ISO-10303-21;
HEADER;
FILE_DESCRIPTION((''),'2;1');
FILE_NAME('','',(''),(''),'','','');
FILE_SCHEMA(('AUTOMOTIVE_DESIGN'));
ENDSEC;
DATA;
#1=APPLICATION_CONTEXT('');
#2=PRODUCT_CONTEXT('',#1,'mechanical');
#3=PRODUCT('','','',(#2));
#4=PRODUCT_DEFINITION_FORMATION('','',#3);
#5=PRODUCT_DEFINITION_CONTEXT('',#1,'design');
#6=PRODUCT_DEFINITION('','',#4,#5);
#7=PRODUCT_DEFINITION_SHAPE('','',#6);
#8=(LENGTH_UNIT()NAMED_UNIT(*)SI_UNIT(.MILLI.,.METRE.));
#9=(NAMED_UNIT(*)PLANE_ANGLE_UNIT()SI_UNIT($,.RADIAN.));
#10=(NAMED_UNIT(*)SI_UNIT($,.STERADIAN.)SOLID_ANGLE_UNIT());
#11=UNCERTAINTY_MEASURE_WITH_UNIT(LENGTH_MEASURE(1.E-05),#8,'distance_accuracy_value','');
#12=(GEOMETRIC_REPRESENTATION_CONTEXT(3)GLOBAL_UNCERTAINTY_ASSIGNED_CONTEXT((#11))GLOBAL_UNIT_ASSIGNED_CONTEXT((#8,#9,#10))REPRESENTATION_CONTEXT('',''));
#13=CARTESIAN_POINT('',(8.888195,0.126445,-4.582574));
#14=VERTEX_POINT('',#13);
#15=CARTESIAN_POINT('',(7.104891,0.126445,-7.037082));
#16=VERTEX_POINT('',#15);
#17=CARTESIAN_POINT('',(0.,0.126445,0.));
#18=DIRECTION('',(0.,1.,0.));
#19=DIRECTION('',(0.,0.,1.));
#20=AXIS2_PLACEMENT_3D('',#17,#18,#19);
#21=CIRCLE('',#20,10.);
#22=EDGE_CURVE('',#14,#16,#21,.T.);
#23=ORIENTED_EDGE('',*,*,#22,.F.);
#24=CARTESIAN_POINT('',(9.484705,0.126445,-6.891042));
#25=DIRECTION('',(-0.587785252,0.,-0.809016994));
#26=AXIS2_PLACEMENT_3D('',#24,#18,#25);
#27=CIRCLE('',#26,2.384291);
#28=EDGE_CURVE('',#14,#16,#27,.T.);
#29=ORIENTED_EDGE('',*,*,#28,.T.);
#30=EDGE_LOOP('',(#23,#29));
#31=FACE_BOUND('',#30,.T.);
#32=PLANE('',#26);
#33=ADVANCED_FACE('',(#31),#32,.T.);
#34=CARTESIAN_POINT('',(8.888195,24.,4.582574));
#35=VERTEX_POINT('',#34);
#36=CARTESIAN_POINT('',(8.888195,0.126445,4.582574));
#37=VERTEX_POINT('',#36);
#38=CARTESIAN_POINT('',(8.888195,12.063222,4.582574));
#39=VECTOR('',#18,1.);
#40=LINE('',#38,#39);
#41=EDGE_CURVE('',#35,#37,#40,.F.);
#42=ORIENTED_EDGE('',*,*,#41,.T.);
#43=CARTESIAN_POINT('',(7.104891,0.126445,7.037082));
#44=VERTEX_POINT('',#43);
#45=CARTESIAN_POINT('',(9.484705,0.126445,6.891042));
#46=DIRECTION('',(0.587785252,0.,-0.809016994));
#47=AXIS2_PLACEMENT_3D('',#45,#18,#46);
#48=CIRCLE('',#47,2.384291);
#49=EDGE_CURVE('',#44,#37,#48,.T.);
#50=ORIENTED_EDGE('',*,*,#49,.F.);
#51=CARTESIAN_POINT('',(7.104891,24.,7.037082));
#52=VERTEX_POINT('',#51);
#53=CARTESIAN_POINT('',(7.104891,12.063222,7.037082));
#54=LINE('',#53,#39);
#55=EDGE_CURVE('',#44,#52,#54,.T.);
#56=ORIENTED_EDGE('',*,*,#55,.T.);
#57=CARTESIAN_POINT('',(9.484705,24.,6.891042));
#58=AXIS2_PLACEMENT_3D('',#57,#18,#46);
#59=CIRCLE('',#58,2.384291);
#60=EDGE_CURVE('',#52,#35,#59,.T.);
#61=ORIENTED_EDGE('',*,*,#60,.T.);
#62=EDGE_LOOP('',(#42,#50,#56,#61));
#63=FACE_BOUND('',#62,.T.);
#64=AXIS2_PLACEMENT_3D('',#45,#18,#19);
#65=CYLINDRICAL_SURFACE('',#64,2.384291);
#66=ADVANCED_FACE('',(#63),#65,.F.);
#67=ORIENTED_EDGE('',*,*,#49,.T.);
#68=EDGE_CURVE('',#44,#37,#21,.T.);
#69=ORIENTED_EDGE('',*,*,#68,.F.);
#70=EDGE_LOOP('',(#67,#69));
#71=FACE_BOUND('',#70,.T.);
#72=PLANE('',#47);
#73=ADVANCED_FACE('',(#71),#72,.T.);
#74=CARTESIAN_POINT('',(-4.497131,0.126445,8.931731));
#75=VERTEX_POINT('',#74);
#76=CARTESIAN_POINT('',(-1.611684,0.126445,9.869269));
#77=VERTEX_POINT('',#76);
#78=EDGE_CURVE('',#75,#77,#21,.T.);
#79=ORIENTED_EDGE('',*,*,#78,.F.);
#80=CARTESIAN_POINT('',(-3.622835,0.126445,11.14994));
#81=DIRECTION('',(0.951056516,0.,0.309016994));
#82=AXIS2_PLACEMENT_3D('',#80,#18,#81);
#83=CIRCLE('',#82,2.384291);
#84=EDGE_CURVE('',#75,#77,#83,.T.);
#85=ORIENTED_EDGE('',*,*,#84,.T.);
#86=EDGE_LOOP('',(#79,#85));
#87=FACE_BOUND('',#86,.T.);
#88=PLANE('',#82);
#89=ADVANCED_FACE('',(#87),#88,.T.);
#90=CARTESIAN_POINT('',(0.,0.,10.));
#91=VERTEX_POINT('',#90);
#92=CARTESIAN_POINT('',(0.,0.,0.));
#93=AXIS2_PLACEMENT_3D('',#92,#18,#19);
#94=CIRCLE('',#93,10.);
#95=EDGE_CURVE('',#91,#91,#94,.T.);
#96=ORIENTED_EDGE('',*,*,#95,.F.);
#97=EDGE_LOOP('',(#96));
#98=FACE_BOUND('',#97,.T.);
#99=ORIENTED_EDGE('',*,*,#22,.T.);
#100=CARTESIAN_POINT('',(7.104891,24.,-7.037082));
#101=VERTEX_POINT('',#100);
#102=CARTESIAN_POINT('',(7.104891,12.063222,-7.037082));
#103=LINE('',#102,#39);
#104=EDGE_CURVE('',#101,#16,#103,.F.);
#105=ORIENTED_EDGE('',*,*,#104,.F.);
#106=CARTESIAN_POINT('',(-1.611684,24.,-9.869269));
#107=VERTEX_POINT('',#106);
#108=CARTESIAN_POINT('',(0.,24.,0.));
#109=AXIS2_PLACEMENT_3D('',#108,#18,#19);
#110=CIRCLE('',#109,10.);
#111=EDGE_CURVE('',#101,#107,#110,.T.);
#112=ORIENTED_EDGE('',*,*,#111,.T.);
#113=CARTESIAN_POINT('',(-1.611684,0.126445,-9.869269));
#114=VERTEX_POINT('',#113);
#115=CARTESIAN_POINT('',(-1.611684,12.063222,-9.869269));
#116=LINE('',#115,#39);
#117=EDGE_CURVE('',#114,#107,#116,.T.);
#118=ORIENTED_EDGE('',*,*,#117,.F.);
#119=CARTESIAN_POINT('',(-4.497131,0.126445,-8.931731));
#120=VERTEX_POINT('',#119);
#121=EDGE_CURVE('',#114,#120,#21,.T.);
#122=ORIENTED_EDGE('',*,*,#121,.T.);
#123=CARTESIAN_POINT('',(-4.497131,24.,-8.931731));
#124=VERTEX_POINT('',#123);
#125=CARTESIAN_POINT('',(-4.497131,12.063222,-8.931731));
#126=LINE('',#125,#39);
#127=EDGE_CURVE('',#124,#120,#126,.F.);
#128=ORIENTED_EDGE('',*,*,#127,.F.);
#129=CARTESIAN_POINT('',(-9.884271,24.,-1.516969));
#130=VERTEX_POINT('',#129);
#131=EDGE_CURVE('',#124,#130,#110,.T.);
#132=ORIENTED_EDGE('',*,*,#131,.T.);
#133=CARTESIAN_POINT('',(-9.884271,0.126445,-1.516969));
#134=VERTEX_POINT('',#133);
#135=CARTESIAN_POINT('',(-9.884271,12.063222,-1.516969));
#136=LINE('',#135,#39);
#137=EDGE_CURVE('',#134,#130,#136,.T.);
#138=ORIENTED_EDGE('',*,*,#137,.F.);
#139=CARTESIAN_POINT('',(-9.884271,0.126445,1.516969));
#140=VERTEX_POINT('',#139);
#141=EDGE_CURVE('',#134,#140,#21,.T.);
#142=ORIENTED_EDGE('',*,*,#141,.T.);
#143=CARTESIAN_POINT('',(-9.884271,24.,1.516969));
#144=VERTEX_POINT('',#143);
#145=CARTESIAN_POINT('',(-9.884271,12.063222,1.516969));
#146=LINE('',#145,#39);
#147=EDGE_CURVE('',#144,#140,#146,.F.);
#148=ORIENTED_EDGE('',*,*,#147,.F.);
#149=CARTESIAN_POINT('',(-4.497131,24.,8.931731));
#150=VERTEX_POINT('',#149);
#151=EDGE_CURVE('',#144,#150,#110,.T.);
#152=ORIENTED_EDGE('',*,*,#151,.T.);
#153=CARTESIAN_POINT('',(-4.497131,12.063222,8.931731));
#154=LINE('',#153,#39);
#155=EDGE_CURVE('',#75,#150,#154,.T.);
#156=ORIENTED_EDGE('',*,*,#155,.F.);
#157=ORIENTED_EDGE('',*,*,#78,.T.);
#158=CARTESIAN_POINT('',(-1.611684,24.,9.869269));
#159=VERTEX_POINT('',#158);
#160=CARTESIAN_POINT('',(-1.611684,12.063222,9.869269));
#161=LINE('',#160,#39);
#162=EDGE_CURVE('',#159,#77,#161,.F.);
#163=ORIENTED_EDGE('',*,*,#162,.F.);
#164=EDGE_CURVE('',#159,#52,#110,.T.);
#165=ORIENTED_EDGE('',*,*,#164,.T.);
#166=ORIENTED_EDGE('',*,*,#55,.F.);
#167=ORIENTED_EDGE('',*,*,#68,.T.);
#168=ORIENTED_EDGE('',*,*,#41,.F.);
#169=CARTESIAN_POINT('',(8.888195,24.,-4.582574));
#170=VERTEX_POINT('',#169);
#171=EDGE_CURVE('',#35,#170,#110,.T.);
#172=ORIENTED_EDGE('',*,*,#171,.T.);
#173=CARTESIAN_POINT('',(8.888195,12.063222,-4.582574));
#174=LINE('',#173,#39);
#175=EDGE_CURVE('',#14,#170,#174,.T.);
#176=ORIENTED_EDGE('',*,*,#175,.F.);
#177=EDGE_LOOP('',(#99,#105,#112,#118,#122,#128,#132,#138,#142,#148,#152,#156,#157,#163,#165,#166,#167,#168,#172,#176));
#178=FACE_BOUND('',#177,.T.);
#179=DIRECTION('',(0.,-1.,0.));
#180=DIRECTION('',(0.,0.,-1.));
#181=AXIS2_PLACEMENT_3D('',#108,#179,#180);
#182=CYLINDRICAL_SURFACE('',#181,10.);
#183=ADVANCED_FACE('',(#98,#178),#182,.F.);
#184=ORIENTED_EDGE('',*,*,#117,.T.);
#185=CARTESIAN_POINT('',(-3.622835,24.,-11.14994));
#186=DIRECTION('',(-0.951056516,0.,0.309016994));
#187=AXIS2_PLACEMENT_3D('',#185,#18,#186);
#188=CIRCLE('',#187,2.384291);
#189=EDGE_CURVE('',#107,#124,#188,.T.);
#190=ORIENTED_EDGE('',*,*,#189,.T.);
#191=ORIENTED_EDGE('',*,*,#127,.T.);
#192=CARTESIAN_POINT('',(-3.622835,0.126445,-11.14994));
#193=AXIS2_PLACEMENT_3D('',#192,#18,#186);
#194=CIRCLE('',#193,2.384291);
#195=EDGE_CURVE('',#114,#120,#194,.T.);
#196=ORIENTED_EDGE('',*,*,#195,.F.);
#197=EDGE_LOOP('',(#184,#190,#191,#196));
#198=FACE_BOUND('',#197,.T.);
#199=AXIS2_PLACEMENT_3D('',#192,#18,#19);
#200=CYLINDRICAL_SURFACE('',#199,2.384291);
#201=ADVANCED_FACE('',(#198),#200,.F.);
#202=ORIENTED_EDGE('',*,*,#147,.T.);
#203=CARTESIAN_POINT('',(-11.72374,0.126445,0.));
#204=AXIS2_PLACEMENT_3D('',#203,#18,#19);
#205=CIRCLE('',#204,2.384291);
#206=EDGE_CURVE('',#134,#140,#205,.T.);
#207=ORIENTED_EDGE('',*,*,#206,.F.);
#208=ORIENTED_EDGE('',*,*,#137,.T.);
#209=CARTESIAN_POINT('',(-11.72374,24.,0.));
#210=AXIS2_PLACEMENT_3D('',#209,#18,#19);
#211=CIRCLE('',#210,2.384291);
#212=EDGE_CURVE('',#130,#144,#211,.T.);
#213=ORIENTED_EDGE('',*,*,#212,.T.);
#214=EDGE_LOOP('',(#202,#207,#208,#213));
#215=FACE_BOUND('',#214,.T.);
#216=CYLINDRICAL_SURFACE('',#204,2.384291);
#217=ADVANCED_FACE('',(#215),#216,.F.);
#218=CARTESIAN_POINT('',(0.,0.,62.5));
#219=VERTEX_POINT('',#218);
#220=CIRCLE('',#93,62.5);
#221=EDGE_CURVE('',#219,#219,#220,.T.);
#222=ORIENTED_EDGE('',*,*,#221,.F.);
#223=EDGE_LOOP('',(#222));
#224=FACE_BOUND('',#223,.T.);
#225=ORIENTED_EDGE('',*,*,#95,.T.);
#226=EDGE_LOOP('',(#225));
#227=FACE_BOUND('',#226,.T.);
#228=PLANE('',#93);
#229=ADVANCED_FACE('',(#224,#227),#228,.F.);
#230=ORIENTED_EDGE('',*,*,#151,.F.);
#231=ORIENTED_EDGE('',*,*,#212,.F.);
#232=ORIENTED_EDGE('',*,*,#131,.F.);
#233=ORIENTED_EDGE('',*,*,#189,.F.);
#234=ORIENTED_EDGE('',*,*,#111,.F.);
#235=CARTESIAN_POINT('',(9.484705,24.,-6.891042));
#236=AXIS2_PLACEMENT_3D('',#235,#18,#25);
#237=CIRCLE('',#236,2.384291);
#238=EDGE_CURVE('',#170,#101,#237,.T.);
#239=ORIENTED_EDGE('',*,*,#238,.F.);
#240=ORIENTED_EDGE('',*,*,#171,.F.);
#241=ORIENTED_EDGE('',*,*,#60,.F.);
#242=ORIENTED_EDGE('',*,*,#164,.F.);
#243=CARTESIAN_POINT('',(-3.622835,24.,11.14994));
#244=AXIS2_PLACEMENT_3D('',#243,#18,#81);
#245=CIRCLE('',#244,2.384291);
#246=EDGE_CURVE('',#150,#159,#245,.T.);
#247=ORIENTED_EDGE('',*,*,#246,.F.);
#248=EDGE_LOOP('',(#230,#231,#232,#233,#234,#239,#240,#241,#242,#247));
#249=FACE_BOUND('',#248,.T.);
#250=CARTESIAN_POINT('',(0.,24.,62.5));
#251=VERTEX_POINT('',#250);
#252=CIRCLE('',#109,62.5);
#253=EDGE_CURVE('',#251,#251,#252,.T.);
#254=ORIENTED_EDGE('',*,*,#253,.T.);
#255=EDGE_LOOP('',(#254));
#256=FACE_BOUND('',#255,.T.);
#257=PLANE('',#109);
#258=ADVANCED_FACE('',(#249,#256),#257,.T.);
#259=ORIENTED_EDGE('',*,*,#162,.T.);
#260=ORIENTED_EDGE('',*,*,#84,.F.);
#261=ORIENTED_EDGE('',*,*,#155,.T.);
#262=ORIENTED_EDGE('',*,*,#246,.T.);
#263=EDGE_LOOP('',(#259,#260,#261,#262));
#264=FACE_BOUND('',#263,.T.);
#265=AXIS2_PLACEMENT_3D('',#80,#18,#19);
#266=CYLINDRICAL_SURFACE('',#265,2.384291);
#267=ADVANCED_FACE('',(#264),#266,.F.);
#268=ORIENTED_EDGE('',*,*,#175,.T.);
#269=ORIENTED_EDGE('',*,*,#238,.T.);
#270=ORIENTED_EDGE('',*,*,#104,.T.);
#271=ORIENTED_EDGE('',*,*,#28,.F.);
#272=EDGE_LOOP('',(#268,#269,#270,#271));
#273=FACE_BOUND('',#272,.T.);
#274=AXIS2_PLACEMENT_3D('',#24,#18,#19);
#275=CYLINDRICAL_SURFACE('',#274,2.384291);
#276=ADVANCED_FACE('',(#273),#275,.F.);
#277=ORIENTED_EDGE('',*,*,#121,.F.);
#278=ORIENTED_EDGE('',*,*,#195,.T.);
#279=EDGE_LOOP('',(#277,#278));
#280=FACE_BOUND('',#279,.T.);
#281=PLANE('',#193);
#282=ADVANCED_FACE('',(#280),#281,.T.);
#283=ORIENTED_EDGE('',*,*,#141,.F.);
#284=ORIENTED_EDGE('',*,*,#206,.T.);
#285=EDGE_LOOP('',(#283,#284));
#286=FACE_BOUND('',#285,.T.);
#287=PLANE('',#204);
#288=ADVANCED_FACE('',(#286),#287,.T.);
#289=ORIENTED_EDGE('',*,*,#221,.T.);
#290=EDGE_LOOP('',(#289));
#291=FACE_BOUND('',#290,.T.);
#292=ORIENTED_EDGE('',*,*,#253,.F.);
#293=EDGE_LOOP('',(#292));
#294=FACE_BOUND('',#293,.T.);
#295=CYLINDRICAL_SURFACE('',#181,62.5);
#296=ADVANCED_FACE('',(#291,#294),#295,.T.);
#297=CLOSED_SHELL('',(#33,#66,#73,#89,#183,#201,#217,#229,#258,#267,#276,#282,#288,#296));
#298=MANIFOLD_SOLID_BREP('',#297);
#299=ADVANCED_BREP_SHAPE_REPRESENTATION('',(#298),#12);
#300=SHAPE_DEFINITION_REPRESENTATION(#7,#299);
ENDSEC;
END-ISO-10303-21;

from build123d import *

# Parameters (mm, degrees)
SKETCH1_R           = 62.5
BOSS_EXTRUDE1_DEPTH = 24
SKETCH2_R           = 10
CUT_EXTRUDE1_DEPTH  = 92.588754768
SKETCH3_R           = 2.384291232
CUT_EXTRUDE2_DEPTH  = 23.873555075
CIRPATTERN1_COUNT   = 5


with BuildPart() as part:
    # Sketch1 → Boss-Extrude1 (new body)
    with BuildSketch(Plane(origin=(0, 0, 0), x_dir=(1, 0, 0), z_dir=(0, 1, 0))):
        Circle(SKETCH1_R)
    extrude(amount=BOSS_EXTRUDE1_DEPTH)

    # Sketch2 → Cut-Extrude1 (cut, through all)
    with BuildSketch(Plane(origin=(0, 0, 0), x_dir=(1, 0, 0), z_dir=(0, 1, 0))):
        Circle(SKETCH2_R)
    extrude(amount=CUT_EXTRUDE1_DEPTH, mode=Mode.SUBTRACT)

    # Sketch3 → Cut-Extrude2 (cut)
    with BuildSketch(Plane(origin=(0, 24, 0), x_dir=(1, 0, 0), z_dir=(0, 1, 0))):
        with Locations((-11.723740212, 0)):
            Circle(SKETCH3_R)
    cut_extrude2 = extrude(amount=-CUT_EXTRUDE2_DEPTH, mode=Mode.SUBTRACT)

    # CirPattern1: Cut-Extrude2 ×5 about axis
    cirpattern1_axis = Axis((0, 0, 0), (0, 1, 0))
    for i in range(1, CIRPATTERN1_COUNT):
        add(cut_extrude2.rotate(cirpattern1_axis, i * 360 / CIRPATTERN1_COUNT), mode=Mode.SUBTRACT)


solid = part.part
